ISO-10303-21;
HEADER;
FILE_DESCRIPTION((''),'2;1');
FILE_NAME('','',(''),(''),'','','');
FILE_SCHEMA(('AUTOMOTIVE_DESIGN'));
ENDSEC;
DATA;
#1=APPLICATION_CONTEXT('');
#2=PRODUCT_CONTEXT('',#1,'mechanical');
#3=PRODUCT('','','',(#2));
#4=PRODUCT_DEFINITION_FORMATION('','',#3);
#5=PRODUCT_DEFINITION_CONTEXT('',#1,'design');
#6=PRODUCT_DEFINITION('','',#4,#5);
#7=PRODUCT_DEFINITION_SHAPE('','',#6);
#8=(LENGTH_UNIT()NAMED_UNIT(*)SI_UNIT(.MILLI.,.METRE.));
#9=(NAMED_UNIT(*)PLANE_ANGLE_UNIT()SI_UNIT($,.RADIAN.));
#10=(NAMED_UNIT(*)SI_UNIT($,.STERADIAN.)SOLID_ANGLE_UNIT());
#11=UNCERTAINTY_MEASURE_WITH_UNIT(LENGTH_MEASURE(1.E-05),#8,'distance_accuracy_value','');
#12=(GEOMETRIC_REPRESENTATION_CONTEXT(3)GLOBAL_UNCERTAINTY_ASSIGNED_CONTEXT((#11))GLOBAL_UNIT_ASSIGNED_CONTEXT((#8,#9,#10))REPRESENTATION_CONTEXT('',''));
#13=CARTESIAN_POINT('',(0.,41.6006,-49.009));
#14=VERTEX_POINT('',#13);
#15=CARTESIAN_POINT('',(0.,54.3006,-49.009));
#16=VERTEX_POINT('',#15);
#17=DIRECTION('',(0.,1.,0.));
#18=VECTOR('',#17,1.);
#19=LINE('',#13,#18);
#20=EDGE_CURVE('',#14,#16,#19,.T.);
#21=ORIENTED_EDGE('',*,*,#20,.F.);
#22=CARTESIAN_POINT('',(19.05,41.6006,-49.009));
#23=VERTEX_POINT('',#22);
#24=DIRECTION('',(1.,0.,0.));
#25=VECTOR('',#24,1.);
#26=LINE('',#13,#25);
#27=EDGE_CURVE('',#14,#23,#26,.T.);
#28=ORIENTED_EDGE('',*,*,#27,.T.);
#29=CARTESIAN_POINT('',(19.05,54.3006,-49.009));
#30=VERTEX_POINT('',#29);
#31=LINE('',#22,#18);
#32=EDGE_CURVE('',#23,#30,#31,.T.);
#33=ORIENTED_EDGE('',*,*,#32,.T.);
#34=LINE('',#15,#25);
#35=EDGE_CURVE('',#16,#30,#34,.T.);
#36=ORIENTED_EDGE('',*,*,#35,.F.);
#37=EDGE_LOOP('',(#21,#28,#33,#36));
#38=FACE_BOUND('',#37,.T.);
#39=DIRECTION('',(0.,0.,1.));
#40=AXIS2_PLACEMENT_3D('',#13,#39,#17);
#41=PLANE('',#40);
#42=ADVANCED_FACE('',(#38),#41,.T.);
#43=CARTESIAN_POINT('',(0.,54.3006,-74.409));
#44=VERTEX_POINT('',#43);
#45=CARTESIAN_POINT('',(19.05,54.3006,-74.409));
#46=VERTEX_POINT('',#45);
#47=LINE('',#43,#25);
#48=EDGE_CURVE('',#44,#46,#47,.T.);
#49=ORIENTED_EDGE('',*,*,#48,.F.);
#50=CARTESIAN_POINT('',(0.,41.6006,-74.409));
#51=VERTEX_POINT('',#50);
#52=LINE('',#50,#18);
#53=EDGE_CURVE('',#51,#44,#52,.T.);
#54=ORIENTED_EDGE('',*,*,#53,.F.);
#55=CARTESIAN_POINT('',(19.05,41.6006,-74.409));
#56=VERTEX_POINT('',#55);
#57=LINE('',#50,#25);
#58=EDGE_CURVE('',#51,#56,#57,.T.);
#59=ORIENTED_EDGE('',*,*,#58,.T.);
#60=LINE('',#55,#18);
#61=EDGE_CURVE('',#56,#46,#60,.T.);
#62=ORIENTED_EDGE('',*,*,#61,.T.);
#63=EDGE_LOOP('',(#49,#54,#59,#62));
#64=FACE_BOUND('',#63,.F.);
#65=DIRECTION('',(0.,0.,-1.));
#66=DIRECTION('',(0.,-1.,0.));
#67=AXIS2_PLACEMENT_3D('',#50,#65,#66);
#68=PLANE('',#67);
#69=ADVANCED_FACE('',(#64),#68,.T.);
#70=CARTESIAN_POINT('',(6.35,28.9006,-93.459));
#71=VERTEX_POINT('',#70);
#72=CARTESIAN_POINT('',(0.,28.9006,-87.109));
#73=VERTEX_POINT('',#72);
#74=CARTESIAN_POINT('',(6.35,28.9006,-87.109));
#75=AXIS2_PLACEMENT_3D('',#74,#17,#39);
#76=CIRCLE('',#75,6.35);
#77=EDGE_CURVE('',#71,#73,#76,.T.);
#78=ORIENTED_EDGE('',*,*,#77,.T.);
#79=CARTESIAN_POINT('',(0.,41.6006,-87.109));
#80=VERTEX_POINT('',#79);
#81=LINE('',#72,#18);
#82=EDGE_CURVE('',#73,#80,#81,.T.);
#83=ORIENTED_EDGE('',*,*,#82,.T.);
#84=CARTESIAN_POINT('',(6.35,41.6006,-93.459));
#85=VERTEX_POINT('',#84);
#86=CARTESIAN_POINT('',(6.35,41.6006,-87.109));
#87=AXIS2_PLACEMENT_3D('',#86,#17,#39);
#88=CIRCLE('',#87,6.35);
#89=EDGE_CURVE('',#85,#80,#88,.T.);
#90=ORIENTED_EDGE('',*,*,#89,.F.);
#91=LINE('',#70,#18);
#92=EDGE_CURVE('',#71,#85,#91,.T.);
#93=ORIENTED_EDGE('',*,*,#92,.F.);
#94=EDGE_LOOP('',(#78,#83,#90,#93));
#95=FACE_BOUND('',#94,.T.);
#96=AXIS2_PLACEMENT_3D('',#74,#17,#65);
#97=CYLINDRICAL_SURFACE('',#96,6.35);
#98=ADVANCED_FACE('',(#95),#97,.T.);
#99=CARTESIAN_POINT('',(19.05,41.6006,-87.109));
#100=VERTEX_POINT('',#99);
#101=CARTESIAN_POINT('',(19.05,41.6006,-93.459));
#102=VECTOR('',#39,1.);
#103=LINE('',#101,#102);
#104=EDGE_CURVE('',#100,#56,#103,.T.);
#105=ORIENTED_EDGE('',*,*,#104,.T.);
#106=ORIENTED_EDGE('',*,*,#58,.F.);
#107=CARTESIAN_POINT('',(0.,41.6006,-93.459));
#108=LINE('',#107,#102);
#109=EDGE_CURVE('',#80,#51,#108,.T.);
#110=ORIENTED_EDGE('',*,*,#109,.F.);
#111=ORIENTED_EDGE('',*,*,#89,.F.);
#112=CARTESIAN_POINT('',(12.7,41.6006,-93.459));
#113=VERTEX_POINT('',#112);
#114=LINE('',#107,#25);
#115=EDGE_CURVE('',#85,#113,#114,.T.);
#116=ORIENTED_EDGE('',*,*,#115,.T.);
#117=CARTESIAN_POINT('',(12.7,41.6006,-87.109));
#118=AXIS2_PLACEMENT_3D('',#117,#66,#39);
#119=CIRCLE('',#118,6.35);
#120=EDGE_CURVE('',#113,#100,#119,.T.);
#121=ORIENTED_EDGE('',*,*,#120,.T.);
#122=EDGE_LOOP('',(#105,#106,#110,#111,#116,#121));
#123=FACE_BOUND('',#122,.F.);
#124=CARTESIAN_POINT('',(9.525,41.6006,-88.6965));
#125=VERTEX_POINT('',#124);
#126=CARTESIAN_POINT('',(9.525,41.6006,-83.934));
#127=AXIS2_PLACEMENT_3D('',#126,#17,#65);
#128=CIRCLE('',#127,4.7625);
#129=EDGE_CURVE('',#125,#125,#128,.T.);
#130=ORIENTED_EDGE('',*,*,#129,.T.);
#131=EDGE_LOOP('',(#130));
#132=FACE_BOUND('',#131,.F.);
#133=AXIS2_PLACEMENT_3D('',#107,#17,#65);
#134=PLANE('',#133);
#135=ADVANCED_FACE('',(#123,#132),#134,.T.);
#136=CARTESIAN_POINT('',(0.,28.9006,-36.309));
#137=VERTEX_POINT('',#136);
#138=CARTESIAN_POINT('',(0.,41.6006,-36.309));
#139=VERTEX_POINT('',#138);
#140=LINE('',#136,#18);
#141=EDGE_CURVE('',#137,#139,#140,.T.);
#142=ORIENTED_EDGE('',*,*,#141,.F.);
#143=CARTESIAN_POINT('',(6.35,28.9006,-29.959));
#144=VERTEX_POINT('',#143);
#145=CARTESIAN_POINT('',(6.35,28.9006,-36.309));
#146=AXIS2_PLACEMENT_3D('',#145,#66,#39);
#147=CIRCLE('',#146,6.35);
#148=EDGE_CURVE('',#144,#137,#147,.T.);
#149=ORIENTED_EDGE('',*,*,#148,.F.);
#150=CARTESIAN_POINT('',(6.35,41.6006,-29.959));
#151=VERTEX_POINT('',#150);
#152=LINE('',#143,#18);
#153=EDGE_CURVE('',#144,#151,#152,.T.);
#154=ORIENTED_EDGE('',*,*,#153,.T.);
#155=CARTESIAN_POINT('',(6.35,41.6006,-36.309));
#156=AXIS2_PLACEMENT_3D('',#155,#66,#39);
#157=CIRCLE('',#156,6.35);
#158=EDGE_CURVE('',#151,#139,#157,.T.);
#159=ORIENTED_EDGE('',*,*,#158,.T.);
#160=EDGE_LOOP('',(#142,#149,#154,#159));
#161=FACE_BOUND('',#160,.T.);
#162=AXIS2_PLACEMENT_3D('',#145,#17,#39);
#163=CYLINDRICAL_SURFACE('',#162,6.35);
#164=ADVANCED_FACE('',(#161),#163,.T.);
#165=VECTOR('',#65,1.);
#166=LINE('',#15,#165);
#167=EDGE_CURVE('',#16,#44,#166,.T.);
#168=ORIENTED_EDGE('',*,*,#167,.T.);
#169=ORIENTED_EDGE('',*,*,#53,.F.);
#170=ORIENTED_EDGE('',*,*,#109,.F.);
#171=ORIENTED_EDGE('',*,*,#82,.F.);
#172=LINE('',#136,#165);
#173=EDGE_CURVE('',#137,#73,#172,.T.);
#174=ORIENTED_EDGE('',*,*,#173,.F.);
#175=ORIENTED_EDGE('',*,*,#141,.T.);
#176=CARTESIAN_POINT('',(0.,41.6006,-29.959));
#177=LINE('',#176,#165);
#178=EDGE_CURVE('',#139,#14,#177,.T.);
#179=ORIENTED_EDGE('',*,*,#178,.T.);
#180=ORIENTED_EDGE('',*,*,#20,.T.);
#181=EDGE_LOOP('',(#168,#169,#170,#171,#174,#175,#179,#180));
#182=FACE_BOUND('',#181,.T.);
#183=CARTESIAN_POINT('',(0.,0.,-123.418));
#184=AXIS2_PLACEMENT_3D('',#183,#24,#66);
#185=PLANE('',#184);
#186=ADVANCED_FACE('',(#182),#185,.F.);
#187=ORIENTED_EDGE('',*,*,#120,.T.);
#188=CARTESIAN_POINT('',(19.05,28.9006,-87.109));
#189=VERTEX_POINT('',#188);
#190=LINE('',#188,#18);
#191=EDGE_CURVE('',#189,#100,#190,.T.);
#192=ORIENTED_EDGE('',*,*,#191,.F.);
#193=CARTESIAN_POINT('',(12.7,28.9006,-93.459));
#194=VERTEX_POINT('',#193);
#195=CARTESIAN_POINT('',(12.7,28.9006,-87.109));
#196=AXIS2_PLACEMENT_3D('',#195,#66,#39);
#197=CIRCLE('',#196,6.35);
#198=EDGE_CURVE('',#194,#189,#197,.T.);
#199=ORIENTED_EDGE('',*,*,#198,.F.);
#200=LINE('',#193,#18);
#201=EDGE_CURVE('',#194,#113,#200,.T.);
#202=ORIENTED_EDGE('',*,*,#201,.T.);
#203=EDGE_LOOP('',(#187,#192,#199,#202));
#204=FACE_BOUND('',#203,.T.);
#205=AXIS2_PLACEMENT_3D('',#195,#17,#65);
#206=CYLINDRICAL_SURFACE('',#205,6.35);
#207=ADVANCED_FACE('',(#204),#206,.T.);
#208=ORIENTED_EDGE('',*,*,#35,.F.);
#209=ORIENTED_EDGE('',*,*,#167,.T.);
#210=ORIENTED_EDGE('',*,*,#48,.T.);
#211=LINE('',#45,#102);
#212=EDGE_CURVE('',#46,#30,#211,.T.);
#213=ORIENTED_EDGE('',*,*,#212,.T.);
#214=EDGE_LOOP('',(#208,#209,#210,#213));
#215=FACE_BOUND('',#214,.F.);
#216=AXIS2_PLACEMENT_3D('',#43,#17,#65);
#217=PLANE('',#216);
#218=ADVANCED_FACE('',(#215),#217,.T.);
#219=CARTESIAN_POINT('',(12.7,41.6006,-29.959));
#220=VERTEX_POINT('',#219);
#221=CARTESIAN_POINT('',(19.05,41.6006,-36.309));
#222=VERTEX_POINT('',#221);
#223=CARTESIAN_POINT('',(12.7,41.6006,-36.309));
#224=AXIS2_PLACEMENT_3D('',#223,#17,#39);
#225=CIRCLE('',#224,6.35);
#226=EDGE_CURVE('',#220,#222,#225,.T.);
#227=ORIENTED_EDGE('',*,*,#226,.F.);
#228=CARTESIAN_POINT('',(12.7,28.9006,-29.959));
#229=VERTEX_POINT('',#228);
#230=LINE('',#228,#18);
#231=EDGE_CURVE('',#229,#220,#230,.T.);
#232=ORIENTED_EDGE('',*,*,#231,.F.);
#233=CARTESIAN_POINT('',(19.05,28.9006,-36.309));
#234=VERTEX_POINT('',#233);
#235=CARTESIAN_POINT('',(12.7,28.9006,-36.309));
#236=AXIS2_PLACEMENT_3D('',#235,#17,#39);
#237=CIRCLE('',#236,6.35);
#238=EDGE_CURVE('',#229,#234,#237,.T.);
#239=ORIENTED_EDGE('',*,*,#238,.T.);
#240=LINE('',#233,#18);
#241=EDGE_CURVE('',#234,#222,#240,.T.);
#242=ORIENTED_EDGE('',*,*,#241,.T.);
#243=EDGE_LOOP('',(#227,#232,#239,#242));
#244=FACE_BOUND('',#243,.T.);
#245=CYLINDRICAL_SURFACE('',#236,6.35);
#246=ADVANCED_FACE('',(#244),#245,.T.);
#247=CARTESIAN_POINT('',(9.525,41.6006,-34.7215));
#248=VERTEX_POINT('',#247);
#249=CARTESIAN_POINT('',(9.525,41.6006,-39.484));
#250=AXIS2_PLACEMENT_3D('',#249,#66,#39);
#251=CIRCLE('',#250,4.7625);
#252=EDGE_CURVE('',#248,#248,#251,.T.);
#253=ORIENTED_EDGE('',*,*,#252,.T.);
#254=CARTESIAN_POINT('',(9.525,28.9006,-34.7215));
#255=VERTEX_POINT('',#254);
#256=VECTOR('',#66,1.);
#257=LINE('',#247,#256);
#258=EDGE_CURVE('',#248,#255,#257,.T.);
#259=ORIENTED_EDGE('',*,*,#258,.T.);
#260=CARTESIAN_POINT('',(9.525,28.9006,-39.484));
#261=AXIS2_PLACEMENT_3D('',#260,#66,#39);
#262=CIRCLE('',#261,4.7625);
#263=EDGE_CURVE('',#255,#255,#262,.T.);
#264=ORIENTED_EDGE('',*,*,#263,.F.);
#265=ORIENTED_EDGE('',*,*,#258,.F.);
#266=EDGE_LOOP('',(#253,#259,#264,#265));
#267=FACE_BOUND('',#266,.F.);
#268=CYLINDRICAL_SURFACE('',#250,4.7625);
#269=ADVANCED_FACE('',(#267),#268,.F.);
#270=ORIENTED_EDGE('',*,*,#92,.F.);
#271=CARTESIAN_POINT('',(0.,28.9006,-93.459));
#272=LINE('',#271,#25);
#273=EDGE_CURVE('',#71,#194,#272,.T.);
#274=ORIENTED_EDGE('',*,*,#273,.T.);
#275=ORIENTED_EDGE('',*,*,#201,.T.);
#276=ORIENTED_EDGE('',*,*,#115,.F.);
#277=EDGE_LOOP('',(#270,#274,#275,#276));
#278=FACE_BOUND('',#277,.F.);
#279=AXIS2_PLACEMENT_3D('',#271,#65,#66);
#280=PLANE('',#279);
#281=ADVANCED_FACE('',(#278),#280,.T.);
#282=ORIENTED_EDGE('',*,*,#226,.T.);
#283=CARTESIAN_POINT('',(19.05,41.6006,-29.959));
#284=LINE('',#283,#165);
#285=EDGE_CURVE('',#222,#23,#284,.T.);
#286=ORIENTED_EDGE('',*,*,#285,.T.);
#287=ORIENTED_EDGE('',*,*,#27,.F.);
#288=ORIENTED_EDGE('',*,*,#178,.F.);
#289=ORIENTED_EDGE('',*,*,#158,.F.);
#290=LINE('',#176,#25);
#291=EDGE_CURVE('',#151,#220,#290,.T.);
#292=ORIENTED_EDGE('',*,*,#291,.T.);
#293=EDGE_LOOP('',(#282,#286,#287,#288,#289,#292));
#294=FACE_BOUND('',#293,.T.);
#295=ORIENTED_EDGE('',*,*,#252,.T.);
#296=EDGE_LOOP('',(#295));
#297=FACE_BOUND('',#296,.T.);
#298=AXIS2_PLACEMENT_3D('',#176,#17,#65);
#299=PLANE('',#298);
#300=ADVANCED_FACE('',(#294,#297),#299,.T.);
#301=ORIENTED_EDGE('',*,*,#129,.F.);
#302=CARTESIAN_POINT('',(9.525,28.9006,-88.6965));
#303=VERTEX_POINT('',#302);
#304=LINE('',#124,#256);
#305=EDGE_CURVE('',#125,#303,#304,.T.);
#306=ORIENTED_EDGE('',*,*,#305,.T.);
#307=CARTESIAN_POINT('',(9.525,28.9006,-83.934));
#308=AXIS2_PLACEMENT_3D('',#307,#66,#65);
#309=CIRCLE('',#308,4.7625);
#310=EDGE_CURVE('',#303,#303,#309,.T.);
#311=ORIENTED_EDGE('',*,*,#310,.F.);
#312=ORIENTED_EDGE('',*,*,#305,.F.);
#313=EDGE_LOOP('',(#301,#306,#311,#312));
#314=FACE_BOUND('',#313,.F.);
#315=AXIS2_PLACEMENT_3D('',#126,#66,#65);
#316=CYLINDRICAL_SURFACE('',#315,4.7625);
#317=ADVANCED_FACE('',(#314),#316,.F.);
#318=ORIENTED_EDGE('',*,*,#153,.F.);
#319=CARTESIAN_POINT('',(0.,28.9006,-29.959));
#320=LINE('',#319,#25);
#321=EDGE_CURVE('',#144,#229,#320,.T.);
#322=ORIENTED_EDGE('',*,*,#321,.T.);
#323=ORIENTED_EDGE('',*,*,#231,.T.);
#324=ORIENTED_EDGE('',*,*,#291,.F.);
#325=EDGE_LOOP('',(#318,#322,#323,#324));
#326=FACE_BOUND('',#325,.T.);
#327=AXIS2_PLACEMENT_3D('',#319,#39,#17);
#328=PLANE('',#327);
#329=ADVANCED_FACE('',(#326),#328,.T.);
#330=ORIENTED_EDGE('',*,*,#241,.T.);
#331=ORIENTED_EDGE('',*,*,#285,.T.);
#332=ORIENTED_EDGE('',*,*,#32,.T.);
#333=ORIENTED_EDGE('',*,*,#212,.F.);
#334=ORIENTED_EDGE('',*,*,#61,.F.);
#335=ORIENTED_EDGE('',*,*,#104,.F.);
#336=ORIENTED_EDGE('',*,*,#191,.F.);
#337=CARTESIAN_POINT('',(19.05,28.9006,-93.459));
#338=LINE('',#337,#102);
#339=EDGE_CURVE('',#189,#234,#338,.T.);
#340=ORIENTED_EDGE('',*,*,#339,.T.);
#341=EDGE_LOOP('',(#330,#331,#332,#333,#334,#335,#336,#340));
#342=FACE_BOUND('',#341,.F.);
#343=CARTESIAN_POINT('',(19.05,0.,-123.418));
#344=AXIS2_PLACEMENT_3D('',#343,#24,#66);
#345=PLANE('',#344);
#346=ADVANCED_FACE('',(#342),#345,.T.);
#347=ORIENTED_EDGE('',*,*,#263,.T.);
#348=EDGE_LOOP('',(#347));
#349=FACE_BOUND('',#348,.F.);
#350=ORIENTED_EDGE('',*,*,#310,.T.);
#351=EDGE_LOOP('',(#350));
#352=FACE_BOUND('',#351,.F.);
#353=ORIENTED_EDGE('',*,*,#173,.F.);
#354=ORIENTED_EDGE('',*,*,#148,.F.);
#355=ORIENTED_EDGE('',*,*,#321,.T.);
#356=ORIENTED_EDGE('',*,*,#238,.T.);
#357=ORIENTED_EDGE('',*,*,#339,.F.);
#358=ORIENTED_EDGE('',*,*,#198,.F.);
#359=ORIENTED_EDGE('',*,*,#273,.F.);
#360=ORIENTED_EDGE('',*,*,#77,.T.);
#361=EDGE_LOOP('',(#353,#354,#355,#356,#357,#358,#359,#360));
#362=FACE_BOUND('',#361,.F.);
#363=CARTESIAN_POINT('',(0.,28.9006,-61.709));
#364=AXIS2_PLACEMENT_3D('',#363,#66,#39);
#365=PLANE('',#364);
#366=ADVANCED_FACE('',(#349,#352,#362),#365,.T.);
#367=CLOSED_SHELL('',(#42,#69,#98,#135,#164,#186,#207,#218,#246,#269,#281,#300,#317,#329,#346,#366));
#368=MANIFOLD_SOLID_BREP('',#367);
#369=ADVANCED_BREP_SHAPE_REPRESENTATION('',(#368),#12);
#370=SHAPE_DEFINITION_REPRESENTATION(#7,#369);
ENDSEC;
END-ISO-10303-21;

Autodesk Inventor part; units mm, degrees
ref_plane "YZ Plane" through (0, 0, 0) normal (1, 0, 0) x (0, 1, 0)
ref_plane "XZ Plane" through (0, 0, 0) normal (0, 1, 0) x (-1, 0, 0)
ref_plane "XY Plane" through (0, 0, 0) normal (0, 0, 1) x (1, 0, 0)
sketch "Sketch2" plane through (0, 0, 0) normal (1, 0, 0) x (0, 1, 0)
  line L0 (28.9006, -29.959) -> (41.6006, -29.959)
  line L1 (41.6006, -29.959) -> (41.6006, -49.009)
  line L2 (41.6006, -49.009) -> (54.3006, -49.009)
  line L3 (54.3006, -49.009) -> (54.3006, -61.709)
  line L4 (54.3006, -61.709) -> (28.9006, -61.709)
  line L5 (28.9006, -61.709) -> (28.9006, -29.959)
  point P0 (0, 0)
  dimension "d0" = 12.7
  dimension "d1" = 19.05
  dimension "d2" = 12.7
  dimension "d3" = 12.7
extrude "Extrusion1" add sketch "Sketch2" along normal blind 19.05
sketch "Sketch3" plane through (0, 41.6006, -29.959) normal (0, 1, 0) x (1, 0, 0)
  line L0 (0, 0) -> (0, 19.05) projected
  line L1 (0, 0) -> (19.05, 0) projected
  line L2 (19.05, 19.05) -> (19.05, 0) projected
  line L3 (0, 19.05) -> (19.05, 19.05) projected
  line L4 (0, 19.05) -> (19.05, 19.05) projected
  point P0 (0, -29.959)
  point P1 (9.525, 9.525)
hole "Hole1" at (9.525, 41.6006, -39.484) direction (0, -1, 0) diameter 9.525 end through all
fillet "Fillet1" radius 6.35 2 edges at (19.05, 35.2506, -29.959) (0, 35.2506, -29.959)
mirror "Mirror1" about plane through (0, 28.9006, -61.709) normal (0, 0, -1) of "Hole1", "Extrusion1", "Fillet1"
properties part number "Mirror"
